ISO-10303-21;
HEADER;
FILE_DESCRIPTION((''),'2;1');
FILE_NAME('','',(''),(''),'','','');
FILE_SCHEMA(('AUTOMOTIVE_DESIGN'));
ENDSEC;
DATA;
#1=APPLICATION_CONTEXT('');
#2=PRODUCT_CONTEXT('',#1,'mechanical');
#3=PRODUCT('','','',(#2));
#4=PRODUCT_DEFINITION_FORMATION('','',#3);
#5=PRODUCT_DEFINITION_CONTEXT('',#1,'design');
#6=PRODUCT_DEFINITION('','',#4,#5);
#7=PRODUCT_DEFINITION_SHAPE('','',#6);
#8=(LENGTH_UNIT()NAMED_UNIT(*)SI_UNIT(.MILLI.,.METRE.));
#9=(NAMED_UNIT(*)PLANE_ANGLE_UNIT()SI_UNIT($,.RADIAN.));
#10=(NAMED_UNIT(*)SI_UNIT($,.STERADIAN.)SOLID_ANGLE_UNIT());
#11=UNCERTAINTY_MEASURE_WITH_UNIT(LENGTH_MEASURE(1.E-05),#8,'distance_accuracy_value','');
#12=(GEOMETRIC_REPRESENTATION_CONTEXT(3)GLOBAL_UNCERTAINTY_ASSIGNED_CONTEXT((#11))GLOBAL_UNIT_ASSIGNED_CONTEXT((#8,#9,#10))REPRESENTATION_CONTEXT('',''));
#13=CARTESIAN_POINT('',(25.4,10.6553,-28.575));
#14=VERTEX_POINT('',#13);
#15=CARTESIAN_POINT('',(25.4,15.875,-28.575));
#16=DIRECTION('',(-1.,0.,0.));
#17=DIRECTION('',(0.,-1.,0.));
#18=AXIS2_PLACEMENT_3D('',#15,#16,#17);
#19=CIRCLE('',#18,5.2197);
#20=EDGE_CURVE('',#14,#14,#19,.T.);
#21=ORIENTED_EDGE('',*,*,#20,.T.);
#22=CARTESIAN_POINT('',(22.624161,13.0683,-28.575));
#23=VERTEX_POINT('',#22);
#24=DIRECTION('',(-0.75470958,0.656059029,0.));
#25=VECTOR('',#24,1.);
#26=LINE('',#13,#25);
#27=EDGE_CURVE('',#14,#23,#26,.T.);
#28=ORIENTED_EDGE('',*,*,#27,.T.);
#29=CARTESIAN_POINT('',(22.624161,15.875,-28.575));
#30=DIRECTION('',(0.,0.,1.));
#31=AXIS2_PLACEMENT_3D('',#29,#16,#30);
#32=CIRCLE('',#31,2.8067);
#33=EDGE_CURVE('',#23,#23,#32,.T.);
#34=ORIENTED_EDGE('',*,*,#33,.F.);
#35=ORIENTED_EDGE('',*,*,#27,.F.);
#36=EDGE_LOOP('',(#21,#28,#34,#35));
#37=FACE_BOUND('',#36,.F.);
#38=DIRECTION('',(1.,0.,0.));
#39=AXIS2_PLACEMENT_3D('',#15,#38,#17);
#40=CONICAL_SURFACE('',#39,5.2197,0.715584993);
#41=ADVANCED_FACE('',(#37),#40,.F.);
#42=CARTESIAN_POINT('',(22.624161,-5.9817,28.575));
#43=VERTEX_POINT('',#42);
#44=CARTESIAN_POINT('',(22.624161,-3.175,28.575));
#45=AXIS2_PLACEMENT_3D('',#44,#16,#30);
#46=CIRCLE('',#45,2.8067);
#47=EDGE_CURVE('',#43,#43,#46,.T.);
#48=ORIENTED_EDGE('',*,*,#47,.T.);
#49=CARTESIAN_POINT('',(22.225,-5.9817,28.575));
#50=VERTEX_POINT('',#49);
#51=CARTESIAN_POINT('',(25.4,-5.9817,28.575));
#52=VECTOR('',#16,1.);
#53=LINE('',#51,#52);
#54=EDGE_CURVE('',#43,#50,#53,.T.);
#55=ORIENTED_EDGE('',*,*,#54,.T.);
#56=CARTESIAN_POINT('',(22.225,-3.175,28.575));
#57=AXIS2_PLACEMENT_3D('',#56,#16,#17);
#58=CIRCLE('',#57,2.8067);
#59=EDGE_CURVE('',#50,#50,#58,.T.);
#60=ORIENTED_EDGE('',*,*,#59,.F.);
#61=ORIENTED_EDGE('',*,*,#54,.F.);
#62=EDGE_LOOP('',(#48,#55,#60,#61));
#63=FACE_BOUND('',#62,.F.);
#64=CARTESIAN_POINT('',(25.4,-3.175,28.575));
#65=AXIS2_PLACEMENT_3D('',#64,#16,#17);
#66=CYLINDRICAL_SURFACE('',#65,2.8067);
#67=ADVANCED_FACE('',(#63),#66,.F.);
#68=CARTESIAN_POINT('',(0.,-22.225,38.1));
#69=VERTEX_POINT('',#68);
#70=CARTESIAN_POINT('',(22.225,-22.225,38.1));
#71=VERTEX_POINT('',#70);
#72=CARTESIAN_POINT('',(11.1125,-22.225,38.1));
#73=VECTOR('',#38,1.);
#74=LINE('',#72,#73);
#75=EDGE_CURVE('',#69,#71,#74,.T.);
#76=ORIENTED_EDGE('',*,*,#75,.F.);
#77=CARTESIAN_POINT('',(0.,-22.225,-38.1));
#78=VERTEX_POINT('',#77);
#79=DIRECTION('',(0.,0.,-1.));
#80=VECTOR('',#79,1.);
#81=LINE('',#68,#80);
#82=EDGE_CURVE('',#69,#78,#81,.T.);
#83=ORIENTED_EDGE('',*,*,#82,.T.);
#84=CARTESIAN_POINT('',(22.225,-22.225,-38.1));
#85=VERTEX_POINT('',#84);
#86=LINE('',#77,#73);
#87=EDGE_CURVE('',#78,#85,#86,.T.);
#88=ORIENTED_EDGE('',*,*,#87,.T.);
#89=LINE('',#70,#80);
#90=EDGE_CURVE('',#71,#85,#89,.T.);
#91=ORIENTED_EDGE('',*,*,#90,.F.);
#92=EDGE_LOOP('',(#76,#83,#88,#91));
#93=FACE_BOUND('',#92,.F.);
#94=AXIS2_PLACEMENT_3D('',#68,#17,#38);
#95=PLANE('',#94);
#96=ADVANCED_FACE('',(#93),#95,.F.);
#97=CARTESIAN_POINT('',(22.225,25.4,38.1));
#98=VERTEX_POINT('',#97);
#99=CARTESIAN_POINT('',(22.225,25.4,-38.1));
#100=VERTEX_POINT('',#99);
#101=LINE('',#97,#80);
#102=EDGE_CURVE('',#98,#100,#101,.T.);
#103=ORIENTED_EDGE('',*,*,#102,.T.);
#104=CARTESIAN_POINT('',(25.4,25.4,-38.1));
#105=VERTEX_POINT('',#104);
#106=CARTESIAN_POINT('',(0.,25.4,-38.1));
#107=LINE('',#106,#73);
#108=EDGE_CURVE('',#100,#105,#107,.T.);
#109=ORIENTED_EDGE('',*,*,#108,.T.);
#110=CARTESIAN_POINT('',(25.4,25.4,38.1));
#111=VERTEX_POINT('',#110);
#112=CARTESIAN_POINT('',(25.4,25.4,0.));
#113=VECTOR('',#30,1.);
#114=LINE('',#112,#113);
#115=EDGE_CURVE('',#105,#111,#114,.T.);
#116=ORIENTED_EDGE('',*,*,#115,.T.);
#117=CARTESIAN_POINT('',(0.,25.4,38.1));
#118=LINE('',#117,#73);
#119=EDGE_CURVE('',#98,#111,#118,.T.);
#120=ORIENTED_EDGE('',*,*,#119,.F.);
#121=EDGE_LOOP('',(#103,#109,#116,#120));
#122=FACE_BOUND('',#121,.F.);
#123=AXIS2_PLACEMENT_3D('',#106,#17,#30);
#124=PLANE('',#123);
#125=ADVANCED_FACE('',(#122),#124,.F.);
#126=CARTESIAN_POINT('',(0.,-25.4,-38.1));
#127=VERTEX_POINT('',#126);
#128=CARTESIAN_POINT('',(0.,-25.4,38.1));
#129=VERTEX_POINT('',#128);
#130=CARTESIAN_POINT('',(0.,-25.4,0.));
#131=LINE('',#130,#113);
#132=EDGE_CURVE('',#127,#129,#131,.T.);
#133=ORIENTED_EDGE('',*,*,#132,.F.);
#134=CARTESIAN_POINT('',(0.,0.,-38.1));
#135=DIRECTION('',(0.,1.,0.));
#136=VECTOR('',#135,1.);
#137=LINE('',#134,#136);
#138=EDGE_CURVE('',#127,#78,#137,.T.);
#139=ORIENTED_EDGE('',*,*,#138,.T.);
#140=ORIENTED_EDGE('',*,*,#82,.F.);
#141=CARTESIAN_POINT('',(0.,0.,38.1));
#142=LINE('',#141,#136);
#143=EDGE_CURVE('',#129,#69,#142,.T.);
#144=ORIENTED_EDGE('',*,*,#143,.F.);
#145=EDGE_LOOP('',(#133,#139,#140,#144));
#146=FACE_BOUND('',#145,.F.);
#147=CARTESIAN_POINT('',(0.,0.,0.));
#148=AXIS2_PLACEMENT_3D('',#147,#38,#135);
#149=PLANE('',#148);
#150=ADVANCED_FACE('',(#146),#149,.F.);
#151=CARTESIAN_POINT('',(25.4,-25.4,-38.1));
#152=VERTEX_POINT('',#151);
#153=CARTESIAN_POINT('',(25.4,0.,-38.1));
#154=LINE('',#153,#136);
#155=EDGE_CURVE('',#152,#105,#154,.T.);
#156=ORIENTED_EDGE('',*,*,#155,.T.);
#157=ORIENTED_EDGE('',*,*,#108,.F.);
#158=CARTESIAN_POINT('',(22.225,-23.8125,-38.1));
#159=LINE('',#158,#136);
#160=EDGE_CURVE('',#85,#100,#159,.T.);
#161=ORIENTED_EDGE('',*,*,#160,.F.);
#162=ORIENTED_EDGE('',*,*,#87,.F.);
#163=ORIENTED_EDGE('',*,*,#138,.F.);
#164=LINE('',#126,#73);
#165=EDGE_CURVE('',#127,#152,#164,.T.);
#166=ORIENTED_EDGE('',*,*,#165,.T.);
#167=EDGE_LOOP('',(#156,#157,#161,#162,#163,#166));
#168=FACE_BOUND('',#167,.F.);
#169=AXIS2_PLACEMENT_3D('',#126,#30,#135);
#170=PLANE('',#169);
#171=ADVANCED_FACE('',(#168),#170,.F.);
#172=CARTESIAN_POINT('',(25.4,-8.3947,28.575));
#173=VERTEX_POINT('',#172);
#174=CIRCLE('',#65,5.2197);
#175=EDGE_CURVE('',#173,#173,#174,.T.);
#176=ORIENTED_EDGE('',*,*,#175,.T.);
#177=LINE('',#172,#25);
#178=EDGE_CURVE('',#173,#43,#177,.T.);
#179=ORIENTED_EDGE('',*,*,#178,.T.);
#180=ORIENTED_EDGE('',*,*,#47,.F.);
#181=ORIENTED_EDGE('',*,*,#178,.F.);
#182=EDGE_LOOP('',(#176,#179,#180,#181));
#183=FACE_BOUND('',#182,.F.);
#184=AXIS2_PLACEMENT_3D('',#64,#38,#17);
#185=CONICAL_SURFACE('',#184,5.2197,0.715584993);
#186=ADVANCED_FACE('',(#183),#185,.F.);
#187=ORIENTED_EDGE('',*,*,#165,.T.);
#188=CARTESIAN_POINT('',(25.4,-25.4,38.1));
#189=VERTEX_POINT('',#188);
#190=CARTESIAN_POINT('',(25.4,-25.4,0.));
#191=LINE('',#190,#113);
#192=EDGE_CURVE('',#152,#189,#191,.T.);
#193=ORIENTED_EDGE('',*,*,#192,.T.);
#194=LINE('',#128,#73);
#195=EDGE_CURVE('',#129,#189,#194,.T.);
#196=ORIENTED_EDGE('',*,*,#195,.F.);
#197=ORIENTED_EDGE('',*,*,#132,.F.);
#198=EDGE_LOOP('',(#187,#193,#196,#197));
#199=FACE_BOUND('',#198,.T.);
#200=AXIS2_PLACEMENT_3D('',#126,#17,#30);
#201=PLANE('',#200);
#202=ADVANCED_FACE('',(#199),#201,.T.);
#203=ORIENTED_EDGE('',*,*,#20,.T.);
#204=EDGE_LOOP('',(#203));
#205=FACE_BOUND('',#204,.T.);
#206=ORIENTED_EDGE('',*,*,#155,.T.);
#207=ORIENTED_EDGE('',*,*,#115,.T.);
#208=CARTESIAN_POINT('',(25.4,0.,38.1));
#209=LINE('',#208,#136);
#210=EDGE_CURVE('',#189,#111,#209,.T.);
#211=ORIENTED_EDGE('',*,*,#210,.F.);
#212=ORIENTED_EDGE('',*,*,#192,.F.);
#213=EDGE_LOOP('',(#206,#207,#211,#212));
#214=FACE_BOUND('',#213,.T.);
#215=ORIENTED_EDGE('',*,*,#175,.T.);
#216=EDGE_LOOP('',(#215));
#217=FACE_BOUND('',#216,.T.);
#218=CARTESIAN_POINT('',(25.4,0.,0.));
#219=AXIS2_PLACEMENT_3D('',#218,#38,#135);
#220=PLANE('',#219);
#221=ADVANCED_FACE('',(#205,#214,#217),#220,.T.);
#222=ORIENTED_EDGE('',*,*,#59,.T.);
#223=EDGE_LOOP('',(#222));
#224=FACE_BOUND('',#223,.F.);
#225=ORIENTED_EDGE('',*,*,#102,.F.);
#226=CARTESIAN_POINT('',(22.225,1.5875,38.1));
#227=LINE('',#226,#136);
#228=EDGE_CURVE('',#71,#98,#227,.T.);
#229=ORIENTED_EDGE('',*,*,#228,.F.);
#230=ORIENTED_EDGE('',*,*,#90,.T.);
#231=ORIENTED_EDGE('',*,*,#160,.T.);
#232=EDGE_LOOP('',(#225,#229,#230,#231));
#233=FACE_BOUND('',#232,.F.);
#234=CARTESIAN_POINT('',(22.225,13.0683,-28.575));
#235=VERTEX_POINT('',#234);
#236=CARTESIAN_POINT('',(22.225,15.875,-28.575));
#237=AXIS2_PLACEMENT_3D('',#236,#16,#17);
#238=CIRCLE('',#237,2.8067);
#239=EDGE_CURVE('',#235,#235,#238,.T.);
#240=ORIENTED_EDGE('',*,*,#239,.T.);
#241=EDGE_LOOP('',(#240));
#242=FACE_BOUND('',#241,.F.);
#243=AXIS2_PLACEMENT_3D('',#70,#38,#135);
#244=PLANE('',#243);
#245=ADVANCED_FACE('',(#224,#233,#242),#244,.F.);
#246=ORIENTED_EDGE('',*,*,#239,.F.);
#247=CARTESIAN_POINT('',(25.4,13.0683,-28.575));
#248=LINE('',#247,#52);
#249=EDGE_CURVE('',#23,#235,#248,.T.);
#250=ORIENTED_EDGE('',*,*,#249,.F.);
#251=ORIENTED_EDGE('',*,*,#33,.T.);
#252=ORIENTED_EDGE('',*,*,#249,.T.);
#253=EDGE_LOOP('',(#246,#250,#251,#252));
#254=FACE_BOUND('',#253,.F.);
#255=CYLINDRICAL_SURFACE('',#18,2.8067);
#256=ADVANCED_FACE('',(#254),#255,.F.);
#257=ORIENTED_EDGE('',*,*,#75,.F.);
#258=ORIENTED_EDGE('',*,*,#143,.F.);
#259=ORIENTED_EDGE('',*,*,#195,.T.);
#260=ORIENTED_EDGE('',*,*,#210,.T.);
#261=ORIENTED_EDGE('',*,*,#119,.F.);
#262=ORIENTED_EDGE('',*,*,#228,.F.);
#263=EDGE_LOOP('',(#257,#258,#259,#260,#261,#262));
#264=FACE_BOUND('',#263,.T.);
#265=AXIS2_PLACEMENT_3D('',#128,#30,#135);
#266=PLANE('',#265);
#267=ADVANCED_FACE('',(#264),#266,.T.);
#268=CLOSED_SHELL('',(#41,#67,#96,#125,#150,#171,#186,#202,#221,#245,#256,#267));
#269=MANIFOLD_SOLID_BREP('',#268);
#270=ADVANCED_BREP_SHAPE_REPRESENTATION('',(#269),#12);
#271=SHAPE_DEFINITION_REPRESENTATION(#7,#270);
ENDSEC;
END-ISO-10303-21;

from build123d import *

# Parameters (mm, degrees)
F0_W           = 50.8
F0_H           = 76.2
F1_DEPTH       = 25.4
F3_D           = 5.6134
F3_CSINK_D     = 10.4394
F3_CSINK_ANGLE = 82
F4_W           = 22.225
F4_H           = 47.625
F5_DEPTH       = 76.201


# Not quite as in the source:
# - a feature names something its author has since deleted; it is built from what else it names


with BuildPart() as f1:
    # F0 (on Right) → F1 (new body)
    with BuildSketch(Plane.YZ):
        Rectangle(F0_W, F0_H)
    extrude(amount=F1_DEPTH)

    # F3 (through all)
    with Locations(Plane.YZ.offset(25.4)):
        with Locations((-3.175, 28.575), (15.875, -28.575)):
            CounterSinkHole(F3_D / 2, F3_CSINK_D / 2, counter_sink_angle=F3_CSINK_ANGLE)

    # F4 (on face) → F5 (cut, through all)
    with BuildSketch(Plane.XY.offset(38.1)):
        with Locations((11.1125, 1.5875)):
            Rectangle(F4_W, F4_H)
    extrude(amount=-F5_DEPTH, mode=Mode.SUBTRACT)


solid = f1.part
